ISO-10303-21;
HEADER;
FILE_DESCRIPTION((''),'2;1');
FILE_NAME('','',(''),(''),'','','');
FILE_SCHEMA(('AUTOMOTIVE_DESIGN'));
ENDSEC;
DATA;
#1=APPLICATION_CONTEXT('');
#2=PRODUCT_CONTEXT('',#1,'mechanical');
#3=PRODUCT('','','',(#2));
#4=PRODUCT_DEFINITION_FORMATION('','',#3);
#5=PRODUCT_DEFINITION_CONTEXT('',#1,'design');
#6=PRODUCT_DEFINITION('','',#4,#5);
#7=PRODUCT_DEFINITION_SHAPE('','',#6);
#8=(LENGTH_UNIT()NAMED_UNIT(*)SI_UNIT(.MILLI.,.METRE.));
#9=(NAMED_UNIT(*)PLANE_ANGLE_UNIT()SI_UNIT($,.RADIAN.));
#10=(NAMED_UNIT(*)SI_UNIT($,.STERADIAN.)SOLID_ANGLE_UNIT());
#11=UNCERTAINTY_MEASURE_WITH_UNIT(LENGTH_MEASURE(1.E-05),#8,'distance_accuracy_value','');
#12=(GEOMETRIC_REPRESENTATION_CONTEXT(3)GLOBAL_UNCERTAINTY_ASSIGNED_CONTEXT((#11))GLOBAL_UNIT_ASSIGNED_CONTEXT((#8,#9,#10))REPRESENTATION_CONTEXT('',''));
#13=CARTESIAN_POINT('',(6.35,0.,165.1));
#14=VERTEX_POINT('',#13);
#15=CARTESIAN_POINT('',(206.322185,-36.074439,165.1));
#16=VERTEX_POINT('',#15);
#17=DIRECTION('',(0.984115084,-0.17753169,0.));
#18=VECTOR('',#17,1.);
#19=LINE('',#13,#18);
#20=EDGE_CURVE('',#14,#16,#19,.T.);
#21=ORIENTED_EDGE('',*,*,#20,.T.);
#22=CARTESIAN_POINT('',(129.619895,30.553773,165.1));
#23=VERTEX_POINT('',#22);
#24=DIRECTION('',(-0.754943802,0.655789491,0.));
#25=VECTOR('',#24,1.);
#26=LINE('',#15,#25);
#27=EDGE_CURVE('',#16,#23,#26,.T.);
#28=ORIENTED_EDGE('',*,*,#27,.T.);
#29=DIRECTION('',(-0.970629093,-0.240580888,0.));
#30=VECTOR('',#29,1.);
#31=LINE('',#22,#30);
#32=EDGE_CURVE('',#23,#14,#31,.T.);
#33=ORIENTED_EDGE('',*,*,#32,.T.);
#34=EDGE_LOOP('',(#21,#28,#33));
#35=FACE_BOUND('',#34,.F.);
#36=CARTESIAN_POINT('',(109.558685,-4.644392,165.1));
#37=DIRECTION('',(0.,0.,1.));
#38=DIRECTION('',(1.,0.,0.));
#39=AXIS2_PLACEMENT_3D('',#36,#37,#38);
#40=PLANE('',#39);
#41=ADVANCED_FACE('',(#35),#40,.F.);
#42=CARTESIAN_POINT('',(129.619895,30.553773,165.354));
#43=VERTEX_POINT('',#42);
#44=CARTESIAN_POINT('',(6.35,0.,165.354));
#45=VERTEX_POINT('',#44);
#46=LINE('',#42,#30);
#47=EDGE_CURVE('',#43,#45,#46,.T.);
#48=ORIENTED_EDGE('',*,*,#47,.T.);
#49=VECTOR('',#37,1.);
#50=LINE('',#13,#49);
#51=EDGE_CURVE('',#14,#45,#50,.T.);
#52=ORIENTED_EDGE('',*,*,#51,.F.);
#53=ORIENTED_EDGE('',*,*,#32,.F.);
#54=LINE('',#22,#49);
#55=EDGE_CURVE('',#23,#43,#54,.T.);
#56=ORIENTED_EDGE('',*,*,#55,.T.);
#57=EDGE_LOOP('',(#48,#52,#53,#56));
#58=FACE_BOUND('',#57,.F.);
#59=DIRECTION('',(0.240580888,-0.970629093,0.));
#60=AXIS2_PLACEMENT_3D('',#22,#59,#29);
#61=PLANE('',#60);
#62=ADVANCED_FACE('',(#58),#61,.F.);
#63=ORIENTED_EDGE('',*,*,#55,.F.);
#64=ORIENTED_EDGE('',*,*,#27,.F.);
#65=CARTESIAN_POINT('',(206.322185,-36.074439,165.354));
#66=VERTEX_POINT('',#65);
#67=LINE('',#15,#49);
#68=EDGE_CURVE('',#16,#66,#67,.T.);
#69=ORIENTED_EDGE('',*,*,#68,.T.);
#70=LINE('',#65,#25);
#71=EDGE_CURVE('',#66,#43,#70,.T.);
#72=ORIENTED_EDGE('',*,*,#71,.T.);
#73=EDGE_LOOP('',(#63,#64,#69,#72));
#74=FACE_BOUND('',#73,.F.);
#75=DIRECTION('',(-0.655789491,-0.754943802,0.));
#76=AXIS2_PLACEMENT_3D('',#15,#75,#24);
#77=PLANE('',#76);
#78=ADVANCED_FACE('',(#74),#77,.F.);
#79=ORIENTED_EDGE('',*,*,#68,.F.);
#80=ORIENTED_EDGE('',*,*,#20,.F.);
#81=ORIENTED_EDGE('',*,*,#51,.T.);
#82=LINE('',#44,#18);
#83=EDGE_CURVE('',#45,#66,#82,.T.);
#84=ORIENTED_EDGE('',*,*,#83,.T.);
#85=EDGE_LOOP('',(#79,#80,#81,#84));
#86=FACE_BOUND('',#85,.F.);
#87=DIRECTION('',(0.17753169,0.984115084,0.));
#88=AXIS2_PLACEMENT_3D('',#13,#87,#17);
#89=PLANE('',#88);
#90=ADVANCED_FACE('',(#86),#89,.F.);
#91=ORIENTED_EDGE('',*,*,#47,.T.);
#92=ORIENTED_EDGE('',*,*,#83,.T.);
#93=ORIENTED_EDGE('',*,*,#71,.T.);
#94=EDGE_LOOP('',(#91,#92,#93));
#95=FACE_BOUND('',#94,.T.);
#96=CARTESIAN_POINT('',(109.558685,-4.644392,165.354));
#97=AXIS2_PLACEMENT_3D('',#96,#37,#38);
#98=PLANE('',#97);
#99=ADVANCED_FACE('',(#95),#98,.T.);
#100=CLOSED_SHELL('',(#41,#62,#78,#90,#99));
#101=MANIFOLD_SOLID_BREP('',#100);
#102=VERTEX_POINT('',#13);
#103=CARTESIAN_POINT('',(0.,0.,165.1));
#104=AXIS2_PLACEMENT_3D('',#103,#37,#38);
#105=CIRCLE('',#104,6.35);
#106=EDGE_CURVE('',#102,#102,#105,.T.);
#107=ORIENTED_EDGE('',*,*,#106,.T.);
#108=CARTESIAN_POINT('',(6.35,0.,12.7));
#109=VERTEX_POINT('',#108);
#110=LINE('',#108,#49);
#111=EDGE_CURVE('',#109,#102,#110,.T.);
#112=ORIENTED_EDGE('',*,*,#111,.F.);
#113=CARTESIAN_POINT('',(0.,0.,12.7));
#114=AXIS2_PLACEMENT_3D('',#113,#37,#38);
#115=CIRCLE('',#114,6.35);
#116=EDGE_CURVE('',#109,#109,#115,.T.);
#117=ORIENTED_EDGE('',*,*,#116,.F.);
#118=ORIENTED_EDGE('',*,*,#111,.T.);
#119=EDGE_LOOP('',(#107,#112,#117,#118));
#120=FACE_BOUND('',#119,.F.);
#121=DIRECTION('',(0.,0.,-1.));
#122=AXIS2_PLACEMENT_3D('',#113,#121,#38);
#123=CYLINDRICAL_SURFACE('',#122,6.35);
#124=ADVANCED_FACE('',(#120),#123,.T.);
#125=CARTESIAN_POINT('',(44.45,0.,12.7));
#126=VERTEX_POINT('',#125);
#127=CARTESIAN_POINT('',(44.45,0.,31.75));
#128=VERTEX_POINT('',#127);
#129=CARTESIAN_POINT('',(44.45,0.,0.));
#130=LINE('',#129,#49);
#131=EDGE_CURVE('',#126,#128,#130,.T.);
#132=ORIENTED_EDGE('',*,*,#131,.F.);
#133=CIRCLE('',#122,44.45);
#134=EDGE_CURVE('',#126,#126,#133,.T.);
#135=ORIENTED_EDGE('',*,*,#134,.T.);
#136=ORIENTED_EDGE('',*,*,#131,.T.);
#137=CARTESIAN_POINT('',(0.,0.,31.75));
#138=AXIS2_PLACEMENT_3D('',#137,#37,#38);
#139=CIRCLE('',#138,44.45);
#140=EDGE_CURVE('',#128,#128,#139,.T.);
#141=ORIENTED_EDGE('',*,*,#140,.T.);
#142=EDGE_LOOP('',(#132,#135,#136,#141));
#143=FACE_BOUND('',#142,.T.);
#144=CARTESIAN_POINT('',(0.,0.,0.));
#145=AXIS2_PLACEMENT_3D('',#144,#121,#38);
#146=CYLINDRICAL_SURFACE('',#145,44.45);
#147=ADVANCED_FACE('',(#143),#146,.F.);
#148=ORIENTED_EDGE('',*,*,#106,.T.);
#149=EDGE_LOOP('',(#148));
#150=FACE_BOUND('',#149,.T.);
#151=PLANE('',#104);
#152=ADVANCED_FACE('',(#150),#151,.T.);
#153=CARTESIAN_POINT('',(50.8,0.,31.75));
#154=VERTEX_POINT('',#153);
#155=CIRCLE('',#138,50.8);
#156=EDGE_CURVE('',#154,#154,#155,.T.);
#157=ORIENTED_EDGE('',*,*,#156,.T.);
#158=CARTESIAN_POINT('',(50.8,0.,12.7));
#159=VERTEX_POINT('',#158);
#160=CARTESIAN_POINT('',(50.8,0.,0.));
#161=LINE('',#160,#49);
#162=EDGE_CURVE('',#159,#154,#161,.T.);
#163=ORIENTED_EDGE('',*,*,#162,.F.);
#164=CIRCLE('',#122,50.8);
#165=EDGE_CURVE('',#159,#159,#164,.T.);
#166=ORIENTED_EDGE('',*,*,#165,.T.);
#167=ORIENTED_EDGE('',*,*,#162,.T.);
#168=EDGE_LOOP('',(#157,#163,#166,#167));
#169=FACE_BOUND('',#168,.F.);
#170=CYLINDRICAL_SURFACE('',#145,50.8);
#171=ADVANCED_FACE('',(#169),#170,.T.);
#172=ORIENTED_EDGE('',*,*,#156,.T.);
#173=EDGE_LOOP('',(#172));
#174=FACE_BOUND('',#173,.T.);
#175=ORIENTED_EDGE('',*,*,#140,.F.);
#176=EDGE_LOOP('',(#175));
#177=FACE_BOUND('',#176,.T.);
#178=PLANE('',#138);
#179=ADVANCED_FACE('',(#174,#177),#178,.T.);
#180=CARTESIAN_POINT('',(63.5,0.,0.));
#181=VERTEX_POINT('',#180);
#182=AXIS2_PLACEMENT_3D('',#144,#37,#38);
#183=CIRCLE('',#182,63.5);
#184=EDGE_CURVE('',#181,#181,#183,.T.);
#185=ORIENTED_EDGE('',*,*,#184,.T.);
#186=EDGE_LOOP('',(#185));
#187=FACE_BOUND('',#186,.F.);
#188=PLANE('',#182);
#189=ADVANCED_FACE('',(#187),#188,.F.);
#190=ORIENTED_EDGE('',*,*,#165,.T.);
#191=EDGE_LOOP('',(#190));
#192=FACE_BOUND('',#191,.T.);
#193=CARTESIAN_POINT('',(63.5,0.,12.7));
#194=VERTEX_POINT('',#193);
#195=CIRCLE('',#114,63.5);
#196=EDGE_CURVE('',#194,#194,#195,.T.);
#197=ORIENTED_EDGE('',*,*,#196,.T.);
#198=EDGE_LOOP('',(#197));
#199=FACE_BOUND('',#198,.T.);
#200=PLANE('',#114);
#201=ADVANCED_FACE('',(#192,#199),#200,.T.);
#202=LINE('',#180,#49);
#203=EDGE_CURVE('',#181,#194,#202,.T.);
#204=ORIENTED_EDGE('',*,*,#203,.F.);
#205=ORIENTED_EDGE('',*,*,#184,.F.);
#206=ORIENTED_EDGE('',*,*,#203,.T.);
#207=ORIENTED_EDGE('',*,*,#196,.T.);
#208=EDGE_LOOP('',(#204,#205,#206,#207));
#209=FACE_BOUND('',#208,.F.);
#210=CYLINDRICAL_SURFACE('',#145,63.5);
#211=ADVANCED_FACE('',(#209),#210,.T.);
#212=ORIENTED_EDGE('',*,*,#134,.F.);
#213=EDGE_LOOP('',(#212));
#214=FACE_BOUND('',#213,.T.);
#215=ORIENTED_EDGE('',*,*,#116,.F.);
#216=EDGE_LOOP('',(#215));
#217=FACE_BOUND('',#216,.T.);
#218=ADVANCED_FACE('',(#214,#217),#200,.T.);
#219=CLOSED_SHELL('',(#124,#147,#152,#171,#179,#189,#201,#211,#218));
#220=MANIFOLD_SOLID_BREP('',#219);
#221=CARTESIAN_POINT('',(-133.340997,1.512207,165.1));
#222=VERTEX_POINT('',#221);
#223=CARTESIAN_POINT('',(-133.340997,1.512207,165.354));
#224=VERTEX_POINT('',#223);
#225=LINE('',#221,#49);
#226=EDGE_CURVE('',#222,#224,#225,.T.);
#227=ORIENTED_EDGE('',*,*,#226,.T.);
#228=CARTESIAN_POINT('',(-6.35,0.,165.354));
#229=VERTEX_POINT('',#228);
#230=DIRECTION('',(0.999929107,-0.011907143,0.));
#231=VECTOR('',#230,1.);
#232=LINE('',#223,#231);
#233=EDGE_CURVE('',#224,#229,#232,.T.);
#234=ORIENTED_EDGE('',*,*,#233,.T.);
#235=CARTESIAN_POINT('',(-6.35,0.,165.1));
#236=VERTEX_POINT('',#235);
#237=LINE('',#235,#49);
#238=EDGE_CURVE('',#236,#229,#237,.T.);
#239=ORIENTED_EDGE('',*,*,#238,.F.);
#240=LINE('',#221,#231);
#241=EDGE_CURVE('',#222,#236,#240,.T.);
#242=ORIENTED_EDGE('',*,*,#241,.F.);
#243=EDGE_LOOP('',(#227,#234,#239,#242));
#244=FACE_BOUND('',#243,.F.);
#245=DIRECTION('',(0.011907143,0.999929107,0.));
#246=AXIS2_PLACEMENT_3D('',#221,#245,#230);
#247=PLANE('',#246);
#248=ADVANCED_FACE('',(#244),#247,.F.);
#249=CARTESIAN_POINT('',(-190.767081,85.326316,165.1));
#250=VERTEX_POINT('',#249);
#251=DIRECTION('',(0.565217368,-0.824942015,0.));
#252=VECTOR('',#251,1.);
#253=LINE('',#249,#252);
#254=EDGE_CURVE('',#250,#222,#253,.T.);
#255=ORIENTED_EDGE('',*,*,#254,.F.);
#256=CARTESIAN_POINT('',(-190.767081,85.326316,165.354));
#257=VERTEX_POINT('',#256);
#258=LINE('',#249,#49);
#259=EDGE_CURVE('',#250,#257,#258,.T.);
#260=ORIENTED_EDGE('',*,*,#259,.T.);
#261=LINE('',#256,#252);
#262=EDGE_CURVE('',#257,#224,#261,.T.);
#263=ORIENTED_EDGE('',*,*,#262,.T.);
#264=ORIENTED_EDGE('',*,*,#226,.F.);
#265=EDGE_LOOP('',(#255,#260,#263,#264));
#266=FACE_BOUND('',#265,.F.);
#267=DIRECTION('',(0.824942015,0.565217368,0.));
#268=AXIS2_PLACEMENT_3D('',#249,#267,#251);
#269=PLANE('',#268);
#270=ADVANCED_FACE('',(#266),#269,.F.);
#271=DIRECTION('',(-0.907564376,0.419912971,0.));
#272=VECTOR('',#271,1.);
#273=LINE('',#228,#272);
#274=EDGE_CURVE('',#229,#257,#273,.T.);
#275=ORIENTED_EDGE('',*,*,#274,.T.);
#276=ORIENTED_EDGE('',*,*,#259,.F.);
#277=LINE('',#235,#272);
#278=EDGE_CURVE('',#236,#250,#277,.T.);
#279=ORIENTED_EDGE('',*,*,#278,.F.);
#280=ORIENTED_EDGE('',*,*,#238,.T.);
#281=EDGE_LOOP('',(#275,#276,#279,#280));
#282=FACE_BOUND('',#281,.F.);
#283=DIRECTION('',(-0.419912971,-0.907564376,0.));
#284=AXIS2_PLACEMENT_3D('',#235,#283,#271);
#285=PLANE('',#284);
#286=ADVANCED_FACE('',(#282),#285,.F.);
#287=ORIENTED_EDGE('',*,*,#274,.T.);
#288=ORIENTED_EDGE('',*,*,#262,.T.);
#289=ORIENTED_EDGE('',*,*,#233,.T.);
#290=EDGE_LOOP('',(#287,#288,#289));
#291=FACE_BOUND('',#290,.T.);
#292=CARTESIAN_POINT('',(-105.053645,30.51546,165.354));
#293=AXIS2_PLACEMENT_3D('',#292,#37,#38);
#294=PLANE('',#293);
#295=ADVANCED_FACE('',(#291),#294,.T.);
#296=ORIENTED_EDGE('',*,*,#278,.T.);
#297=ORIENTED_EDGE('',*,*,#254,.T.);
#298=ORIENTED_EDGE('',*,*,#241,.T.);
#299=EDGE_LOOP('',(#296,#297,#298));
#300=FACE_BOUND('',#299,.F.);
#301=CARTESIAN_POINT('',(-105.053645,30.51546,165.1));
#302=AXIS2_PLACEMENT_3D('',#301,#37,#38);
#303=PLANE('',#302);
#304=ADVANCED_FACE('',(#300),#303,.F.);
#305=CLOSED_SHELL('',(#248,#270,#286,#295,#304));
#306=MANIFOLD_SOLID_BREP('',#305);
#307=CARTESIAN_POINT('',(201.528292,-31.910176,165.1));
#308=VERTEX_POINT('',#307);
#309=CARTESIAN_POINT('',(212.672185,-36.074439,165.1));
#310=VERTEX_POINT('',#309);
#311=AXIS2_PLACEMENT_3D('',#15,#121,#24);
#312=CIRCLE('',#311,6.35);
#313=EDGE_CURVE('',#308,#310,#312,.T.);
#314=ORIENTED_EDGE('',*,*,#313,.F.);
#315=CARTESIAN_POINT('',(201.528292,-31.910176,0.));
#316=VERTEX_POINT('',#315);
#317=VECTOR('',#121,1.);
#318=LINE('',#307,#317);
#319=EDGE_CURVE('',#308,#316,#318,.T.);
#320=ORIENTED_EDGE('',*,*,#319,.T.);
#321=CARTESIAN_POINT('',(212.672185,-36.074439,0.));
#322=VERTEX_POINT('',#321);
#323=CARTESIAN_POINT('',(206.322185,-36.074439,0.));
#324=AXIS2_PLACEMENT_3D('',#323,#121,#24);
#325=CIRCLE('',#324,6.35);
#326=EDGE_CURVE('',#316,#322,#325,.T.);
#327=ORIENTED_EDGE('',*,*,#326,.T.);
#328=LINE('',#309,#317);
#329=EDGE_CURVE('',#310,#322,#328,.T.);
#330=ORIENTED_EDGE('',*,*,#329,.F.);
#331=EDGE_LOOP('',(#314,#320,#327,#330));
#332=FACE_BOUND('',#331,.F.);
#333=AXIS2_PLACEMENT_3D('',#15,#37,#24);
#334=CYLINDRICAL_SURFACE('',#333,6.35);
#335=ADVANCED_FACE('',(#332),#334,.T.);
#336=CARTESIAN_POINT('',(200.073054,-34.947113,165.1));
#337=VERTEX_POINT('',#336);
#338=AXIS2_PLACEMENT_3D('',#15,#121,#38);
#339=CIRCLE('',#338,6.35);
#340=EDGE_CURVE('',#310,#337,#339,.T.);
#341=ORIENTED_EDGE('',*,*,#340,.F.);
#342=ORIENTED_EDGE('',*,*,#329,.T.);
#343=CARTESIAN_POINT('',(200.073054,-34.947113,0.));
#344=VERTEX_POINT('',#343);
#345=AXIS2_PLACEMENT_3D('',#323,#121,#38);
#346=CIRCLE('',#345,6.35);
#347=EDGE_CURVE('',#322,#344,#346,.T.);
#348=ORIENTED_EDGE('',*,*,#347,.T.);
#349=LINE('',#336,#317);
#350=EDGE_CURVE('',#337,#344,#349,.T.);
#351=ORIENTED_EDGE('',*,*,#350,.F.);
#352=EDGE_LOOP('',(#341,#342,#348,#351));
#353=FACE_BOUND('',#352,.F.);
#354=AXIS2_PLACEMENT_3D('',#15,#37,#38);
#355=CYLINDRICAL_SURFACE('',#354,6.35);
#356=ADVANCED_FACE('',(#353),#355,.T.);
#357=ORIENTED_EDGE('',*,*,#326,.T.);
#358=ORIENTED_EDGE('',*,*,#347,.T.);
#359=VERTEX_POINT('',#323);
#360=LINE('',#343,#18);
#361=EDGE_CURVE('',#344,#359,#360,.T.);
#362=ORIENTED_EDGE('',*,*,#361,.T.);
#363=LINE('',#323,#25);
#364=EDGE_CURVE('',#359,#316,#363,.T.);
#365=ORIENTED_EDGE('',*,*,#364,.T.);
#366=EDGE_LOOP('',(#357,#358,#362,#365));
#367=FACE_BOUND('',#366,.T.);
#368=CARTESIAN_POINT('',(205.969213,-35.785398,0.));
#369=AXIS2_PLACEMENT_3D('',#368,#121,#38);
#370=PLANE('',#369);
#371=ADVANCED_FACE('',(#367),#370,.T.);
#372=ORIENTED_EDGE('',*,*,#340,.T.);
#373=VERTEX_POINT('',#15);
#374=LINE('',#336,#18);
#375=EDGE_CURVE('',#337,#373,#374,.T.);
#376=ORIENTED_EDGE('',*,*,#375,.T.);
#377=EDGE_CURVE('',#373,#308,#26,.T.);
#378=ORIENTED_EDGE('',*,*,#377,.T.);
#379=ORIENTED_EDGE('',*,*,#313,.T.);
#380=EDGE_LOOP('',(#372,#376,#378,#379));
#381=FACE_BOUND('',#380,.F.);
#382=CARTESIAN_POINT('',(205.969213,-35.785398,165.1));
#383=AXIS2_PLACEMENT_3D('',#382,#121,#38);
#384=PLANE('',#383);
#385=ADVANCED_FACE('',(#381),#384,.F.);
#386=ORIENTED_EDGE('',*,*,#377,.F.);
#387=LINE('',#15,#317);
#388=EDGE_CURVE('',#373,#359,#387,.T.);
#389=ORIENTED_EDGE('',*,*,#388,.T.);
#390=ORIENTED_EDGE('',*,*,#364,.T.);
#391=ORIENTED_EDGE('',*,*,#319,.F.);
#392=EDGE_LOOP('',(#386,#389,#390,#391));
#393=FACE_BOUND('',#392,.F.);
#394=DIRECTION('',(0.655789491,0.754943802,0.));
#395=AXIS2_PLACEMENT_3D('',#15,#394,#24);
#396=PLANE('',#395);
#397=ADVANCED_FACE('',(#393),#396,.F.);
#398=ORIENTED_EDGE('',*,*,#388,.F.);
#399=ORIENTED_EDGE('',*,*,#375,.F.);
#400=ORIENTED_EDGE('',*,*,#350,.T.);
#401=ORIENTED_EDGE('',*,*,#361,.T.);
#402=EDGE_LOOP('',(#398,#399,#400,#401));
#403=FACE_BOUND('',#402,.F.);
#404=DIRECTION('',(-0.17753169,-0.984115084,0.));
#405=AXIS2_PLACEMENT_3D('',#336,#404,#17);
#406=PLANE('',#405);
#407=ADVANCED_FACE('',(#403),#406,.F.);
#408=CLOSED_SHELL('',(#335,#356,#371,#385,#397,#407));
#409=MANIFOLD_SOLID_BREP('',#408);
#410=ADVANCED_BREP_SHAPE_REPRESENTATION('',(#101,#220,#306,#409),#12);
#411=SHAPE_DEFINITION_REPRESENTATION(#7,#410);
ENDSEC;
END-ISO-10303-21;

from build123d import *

# Parameters (mm, degrees)
F0_R      = 63.5
F1_DEPTH  = 12.7
F2_R      = 50.8
F2_R_2    = 44.45
F3_DEPTH  = 31.75
F4_R      = 6.35
F5_DEPTH  = 152.4
F7_DEPTH  = 0.254
F9_DEPTH  = 0.254
F13_DEPTH = 165.1


# Not quite as in the source:
# - the program builds the solid bodies; features that only make, move or delete a surface that nothing else refers to are left out


with BuildPart() as f1:
    # F0 (on Top) → F1 (new body)
    with BuildSketch(Plane.XY):
        Circle(F0_R)
    extrude(amount=F1_DEPTH)

    # F2 (on Top) → F3 (join)
    with BuildSketch(Plane.XY):
        Circle(F2_R)
        Circle(F2_R_2, mode=Mode.SUBTRACT)
    extrude(amount=F3_DEPTH)

    # F4 (on face) → F5 (join)
    with BuildSketch(Plane.XY.offset(12.7)):
        Circle(F4_R)
    extrude(amount=F5_DEPTH)


with BuildPart() as f7:
    # F6 (on face) → F7 (new body)
    with BuildSketch(Plane.XY.offset(165.1)):
        Polygon((129.6198948271, 30.5537727509), (6.35, 0), (206.3221851049, -36.0744394879), align=None)
    extrude(amount=F7_DEPTH)


with BuildPart() as f9:
    # F8 (on face) → F9 (new body)
    with BuildSketch(Plane.XY.offset(165.1)):
        Polygon((-133.3409966481, 1.5122071029), (-6.35, 0), (-190.7670811897, 85.3263157853), align=None)
    extrude(amount=F9_DEPTH)


with BuildPart() as f13:
    # F12 (on face) → F13 (new body)
    with BuildSketch(Plane(origin=(0, 0, 165.1), x_dir=(1, 0, 0), z_dir=(0, 0, -1))):
        with BuildLine():
            ThreePointArc((201.5282919625, 31.910176223), (208.5449399886, 30.1261741335), (212.6721851049, 36.0744394879))
            ThreePointArc((212.6721851049, 36.0744394879), (205.7562701297, 42.3991719124), (200.0730543204, 34.9471132539))
            Line((200.0730543204, 34.9471132539), (206.3221851049, 36.0744394879))
            Line((206.3221851049, 36.0744394879), (201.5282919625, 31.910176223))
        make_face()
    extrude(amount=F13_DEPTH)


solid = Compound([f1.part, f7.part, f9.part, f13.part])
